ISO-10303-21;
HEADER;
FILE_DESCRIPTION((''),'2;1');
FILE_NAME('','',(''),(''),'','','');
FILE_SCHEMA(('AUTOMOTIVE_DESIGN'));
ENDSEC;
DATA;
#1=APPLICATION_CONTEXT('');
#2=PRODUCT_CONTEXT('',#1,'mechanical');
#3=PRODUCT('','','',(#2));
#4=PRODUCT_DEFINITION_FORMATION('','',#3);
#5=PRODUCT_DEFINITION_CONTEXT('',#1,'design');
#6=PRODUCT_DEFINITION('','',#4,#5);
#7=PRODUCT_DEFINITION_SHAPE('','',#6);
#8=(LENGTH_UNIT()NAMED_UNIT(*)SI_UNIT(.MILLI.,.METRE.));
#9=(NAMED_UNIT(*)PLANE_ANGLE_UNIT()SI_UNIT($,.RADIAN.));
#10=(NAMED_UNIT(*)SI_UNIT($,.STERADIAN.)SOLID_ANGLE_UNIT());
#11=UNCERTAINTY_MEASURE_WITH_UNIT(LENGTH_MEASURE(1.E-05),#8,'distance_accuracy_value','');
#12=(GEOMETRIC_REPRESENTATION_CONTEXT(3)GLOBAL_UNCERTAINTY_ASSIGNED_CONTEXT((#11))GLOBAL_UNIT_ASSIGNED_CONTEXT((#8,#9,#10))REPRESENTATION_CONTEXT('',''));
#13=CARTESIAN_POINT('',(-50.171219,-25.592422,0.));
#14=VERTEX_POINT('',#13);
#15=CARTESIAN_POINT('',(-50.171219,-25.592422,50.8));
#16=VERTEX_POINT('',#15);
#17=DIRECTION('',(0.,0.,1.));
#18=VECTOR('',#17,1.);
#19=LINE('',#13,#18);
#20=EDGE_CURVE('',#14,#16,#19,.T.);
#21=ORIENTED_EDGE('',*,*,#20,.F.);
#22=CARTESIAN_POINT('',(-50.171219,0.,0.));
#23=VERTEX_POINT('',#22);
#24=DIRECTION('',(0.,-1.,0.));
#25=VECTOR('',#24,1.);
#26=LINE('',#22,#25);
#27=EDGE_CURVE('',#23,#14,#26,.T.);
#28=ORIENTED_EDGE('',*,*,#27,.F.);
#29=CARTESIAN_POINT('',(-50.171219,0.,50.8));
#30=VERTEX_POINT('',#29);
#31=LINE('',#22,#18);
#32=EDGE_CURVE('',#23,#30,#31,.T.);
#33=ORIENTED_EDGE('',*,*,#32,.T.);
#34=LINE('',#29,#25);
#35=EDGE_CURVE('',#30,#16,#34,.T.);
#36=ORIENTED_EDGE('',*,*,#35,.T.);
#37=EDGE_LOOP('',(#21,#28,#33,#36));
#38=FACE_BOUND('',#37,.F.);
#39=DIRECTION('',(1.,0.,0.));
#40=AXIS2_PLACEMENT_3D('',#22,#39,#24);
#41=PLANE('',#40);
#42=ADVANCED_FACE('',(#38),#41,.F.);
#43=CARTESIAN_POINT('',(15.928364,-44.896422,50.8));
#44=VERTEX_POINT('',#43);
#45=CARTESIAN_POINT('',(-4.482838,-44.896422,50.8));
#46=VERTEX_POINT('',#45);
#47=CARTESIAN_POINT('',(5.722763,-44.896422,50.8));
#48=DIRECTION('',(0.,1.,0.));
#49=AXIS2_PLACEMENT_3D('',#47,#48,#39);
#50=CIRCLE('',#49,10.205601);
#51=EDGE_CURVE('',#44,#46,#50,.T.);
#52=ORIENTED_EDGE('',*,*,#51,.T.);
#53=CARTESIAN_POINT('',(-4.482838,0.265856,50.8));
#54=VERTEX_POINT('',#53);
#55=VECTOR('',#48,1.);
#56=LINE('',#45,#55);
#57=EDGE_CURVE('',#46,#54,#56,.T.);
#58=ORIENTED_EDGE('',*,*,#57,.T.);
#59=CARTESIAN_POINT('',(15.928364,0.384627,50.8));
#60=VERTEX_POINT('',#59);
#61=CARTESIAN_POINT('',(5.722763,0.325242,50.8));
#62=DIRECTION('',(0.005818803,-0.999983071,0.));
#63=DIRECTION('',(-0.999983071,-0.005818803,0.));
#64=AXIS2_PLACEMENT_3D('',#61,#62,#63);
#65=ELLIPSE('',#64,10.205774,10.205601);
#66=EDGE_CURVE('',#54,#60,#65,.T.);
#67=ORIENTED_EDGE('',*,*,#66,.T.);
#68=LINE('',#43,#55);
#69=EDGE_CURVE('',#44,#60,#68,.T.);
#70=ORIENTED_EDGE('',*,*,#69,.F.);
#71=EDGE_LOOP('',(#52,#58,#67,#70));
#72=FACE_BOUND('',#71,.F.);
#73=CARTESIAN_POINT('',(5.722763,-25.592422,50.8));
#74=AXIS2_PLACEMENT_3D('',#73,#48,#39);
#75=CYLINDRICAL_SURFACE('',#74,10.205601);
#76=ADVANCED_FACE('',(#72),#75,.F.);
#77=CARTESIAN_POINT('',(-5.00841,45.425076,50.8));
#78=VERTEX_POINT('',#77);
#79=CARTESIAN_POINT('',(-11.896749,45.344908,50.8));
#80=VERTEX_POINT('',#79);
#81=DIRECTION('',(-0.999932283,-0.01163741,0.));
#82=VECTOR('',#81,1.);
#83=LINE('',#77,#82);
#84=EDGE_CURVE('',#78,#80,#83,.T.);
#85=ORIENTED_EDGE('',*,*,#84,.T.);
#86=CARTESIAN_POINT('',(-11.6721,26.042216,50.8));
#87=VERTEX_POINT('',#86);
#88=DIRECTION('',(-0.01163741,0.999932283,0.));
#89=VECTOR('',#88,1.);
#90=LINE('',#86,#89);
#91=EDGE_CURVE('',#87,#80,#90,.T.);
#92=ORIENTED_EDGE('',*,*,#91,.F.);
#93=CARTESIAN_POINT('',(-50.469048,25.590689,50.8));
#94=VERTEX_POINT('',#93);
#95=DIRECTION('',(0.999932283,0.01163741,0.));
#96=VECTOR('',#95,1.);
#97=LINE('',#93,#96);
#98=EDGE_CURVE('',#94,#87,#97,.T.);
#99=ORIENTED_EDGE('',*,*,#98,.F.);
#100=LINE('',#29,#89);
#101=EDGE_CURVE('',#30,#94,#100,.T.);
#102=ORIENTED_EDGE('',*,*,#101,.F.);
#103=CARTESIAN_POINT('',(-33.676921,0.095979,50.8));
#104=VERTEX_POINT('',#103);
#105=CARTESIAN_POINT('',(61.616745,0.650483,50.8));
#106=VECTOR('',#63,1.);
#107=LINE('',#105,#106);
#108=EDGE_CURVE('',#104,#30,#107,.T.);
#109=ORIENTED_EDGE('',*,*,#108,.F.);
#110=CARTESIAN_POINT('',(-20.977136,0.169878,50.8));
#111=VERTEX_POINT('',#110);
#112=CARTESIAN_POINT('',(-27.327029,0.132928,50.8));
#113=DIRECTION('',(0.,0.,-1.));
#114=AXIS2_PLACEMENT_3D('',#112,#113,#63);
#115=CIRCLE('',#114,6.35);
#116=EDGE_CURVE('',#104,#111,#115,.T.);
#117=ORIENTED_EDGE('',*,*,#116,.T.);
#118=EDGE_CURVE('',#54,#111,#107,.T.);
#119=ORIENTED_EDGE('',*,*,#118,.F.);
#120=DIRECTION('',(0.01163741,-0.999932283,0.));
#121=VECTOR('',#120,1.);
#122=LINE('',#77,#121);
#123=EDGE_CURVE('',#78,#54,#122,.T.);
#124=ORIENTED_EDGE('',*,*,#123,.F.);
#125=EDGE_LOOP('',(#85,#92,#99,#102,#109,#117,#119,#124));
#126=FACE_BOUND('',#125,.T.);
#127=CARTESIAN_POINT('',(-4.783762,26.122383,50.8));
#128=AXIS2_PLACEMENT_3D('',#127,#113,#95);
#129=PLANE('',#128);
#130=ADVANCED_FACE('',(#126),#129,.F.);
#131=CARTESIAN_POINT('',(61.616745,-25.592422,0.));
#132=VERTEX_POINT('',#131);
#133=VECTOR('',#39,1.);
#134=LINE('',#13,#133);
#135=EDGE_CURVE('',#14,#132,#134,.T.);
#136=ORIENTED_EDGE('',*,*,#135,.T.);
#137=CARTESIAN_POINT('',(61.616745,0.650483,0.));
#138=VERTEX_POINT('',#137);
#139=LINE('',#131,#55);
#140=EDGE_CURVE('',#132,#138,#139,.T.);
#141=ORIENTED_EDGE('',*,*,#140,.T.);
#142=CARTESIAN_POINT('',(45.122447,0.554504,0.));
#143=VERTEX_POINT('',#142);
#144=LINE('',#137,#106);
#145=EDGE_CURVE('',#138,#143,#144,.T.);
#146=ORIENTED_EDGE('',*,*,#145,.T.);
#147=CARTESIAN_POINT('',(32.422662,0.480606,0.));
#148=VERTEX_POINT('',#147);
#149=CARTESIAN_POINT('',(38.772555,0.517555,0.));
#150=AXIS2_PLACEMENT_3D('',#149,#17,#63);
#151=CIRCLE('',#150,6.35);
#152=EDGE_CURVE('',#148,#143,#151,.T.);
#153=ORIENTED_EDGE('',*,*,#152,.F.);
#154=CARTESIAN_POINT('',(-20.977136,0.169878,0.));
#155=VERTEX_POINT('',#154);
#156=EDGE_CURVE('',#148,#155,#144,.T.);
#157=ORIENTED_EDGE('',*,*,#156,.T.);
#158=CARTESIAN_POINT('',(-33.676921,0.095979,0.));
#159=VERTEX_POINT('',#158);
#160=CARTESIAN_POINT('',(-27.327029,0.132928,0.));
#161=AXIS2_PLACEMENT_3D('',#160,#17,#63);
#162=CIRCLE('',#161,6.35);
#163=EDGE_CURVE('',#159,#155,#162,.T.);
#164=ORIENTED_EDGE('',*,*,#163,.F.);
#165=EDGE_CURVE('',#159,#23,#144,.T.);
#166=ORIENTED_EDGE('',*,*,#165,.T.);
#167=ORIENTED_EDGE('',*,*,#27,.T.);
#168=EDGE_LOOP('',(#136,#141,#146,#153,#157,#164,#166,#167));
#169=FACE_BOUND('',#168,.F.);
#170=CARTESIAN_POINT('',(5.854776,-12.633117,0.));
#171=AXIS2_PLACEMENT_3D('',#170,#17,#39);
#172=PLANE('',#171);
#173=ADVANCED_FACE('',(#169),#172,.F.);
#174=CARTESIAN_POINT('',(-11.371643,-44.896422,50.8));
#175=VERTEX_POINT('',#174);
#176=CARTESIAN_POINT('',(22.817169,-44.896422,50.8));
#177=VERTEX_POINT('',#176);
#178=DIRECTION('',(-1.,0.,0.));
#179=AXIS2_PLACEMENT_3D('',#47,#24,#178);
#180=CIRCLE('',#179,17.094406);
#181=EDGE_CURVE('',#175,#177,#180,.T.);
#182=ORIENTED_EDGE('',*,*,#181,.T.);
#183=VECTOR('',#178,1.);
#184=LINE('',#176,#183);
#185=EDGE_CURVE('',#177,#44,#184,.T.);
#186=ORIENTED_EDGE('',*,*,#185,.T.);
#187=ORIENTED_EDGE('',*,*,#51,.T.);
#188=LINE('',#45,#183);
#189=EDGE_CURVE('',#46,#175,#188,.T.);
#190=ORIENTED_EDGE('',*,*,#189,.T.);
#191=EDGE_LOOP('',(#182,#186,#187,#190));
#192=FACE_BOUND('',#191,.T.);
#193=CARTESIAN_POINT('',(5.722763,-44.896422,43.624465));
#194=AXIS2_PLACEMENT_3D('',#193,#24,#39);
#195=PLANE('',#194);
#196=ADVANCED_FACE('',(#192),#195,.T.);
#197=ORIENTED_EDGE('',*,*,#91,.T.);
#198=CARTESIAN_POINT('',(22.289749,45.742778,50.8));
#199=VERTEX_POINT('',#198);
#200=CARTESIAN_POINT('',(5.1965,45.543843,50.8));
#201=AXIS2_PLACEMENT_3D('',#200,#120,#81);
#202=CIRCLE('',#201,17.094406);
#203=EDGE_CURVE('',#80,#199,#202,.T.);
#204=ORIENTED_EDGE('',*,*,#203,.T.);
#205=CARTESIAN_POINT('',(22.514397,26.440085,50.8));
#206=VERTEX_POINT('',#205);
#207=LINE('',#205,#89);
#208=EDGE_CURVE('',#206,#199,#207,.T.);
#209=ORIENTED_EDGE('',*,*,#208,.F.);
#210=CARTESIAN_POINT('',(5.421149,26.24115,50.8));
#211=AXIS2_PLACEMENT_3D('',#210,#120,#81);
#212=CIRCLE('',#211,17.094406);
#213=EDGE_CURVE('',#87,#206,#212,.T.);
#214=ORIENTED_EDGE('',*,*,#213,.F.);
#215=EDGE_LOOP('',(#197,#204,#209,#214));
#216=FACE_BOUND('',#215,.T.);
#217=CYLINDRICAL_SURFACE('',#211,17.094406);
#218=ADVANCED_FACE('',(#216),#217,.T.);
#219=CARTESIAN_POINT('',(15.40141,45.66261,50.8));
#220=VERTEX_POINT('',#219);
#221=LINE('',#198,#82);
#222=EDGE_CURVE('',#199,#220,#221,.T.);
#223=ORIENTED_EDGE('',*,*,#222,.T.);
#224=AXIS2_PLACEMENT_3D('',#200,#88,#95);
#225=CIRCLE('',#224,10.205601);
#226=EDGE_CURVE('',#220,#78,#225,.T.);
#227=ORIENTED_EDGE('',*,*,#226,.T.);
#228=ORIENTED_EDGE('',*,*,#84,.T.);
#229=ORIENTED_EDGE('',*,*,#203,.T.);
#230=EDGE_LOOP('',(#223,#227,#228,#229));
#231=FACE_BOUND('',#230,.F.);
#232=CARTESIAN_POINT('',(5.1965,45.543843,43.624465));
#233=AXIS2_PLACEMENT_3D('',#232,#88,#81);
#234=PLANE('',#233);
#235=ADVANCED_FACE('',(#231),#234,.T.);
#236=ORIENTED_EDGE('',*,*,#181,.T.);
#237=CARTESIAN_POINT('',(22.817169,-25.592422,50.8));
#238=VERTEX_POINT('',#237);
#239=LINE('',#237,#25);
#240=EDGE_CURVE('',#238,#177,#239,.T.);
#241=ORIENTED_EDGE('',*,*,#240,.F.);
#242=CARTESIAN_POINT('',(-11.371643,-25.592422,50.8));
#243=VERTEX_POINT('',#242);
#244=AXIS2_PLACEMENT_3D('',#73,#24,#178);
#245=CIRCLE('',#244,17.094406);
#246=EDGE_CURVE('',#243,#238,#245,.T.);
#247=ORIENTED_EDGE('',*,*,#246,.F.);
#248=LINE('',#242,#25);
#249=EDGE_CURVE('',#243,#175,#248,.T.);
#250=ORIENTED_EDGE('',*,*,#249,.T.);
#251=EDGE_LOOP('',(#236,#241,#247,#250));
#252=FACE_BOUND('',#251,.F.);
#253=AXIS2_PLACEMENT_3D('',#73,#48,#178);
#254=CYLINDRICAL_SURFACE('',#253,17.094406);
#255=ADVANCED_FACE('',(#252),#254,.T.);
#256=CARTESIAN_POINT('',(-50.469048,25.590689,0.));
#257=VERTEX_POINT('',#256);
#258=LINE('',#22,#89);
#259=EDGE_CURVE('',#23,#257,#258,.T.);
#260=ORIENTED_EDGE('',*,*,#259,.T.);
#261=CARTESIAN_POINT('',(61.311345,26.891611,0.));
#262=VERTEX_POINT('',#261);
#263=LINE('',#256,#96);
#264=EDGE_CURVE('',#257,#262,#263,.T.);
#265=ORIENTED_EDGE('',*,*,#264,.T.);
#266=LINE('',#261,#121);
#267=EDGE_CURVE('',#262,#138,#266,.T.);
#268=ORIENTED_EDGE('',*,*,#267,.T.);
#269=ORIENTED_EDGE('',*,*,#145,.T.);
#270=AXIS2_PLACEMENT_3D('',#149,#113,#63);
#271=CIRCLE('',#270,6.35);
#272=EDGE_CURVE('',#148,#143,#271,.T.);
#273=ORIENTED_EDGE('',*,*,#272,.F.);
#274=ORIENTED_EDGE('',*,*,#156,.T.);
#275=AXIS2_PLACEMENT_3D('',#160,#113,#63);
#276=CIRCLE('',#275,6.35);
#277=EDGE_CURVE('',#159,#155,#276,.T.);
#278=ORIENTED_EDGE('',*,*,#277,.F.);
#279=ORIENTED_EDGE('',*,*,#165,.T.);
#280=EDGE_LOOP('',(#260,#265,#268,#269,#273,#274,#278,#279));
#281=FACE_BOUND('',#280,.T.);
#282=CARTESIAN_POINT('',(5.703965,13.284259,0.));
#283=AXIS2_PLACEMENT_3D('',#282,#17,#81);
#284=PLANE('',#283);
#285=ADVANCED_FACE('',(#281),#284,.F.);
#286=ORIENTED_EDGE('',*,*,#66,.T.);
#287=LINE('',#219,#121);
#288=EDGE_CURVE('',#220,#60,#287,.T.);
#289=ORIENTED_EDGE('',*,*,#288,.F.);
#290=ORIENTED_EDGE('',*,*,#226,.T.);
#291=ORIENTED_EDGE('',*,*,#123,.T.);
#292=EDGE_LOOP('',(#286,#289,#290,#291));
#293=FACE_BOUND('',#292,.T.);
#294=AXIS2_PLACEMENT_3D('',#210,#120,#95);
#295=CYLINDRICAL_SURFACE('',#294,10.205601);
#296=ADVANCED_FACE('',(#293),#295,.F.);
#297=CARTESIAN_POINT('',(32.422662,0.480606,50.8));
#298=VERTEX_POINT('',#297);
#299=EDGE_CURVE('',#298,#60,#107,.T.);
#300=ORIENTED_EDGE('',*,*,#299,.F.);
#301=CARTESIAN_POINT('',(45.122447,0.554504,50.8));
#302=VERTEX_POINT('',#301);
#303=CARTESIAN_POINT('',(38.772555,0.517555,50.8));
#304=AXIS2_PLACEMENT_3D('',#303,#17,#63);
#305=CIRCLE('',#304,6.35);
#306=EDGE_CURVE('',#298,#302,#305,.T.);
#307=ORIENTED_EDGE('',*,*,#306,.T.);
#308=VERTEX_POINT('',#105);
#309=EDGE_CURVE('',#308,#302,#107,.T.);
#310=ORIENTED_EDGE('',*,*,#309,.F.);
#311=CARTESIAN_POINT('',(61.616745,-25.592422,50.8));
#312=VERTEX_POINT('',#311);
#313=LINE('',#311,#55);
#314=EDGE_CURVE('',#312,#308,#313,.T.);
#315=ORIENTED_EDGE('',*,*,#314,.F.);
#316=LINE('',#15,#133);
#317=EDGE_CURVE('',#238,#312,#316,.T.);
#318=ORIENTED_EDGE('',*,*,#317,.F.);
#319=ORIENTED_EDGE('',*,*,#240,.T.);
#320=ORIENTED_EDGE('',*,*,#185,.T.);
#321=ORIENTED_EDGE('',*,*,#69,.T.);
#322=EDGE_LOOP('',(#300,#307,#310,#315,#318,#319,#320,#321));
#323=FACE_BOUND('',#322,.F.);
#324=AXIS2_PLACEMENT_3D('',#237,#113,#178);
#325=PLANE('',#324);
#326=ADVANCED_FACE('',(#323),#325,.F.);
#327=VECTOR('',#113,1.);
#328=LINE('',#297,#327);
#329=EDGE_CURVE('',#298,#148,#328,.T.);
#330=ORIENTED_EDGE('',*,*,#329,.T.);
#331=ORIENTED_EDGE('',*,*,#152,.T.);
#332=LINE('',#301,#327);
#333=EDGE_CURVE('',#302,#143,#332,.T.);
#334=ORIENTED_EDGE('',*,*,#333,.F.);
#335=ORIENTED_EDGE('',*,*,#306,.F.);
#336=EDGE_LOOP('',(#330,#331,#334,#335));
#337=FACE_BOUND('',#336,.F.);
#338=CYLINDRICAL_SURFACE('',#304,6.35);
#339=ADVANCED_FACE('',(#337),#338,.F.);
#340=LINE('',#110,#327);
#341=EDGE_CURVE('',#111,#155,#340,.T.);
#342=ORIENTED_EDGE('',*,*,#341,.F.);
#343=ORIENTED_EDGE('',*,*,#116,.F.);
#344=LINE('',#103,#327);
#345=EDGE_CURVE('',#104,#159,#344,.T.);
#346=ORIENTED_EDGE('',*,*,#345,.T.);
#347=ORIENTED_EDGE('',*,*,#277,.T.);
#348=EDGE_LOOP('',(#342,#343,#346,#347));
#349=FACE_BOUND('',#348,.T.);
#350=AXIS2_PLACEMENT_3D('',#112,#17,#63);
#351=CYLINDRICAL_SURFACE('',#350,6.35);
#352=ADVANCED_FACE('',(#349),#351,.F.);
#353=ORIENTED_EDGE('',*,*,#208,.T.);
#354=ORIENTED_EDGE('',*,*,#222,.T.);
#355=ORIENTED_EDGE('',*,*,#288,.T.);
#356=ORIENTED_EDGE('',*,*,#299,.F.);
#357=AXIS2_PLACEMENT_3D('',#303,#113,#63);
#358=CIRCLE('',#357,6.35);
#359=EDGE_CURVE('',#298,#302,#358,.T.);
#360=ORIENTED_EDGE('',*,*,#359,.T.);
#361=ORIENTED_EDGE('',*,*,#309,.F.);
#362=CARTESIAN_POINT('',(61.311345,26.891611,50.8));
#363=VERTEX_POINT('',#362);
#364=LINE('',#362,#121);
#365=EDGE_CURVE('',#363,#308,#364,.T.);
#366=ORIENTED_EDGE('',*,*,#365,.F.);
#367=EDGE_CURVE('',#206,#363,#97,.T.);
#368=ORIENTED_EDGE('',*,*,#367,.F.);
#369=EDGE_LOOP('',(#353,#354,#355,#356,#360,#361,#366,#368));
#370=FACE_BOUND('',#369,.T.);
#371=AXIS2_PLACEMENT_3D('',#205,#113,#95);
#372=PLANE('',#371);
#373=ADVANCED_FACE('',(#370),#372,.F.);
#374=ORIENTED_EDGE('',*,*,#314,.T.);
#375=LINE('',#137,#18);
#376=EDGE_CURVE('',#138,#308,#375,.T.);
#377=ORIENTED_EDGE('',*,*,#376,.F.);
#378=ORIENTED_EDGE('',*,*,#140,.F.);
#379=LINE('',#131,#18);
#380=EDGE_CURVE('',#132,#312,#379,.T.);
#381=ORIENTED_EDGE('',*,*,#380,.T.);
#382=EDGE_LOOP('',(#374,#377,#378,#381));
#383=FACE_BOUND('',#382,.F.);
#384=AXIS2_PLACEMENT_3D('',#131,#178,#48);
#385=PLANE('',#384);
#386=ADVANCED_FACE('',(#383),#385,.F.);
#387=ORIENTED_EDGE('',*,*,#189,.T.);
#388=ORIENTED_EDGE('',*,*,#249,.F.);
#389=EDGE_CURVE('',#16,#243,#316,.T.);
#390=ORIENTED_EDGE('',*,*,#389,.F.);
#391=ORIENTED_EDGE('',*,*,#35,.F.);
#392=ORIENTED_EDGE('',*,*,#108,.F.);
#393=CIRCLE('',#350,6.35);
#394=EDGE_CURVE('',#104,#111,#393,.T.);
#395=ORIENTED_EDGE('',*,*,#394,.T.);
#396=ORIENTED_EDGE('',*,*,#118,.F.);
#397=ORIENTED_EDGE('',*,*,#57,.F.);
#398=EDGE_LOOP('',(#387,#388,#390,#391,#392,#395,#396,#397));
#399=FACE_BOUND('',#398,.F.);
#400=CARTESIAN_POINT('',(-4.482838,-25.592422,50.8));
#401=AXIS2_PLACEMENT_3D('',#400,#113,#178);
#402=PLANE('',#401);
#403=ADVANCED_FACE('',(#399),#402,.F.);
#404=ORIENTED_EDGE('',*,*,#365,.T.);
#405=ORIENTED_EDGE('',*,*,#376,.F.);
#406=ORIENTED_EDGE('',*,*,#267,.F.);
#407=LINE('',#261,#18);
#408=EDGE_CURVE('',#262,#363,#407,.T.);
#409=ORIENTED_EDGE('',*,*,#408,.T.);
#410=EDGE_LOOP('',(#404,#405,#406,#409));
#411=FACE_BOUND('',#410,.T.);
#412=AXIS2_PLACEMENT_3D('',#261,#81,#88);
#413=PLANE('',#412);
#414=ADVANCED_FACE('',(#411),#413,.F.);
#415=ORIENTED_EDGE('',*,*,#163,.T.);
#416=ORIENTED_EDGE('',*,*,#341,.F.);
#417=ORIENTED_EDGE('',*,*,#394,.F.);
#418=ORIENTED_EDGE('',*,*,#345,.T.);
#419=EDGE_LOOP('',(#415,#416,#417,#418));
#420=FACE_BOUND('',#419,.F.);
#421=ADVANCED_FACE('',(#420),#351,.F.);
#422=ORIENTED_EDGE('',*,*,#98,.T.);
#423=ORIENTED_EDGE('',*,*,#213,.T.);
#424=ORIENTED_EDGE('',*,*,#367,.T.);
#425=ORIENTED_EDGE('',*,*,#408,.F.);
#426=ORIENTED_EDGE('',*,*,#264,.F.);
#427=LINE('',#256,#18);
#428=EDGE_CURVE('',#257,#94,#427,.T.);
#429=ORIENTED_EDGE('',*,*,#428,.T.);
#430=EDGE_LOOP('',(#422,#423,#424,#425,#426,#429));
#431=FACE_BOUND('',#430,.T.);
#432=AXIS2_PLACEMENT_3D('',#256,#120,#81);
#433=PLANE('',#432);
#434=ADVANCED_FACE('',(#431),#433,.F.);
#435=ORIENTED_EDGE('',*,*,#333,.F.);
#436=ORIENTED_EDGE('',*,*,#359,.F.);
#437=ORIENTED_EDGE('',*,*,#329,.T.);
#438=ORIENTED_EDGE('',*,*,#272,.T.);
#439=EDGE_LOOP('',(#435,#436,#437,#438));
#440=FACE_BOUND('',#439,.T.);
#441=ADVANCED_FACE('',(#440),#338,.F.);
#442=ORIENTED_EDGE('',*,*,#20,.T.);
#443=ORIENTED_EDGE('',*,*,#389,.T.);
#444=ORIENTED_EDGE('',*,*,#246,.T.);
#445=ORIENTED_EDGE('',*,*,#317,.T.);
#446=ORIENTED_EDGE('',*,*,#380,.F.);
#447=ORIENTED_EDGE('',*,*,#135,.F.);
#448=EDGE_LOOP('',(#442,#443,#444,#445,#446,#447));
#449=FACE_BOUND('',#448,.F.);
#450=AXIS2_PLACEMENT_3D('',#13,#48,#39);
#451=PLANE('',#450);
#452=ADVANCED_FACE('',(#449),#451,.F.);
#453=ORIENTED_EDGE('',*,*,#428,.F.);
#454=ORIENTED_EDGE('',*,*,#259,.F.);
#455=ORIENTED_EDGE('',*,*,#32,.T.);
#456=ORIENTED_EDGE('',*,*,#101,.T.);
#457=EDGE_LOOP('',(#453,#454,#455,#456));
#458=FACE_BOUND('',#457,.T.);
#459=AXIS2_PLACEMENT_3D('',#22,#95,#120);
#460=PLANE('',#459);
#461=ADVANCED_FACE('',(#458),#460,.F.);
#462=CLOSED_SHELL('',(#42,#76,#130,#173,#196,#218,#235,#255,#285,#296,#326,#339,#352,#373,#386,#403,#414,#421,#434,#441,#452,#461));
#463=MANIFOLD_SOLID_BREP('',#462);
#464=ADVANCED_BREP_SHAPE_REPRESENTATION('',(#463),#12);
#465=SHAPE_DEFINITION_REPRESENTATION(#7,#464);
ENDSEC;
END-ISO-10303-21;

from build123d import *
from build123d import SkipClean  # not in build123d's __all__

# Parameters (mm, degrees)
F1_DEPTH = 50.8
F3_DEPTH = 33.782
F4_DEPTH = 19.304
F7_DEPTH = 62.738
F8_DEPTH = 50.8


with BuildPart() as f1:
    # F0 (on Top) → F1 (new body)
    with BuildSketch(Plane.XY):
        Polygon((-50.1712188125, 0), (-50.1712188125, -25.5924221128), (61.6167448461, -25.5924221128), (61.6167448461, 0.6504831836), align=None)
    extrude(amount=F1_DEPTH)

    # F2 (on face) → F3 (cut)
    with BuildSketch(Plane.XZ.offset(25.5924221128)):
        with BuildLine():
            Line((15.9283644421, 50.8), (-4.4828384085, 50.8))
            ThreePointArc((-4.4828384085, 50.8), (5.7227630168, 40.5943985747), (15.9283644421, 50.8))
        make_face()
    extrude(amount=-F3_DEPTH, mode=Mode.SUBTRACT)

    # F2 (on face) → F4 (join)
    with BuildSketch(Plane.XZ.offset(25.5924221128)):
        with BuildLine():
            Line((-4.4828384085, 50.8), (-11.371643244, 50.8))
            ThreePointArc((-11.371643244, 50.8), (5.7227630168, 33.7055937392), (22.8171692776, 50.8))
            Line((22.8171692776, 50.8), (15.9283644421, 50.8))
            ThreePointArc((15.9283644421, 50.8), (5.7227630168, 40.5943985747), (-4.4828384085, 50.8))
        make_face()
    extrude(amount=F4_DEPTH)

    # F5 (on face) → F7 (cut)
    with BuildSketch(Plane.XY.offset(50.8)):
        with BuildLine():
            Line((-20.977136112, 0.1698775005), (-33.6769211089, 0.0959786987))
            ThreePointArc((-33.6769211089, 0.0959786987), (-27.2900792096, -6.2169643988), (-20.977136112, 0.1698775005))
        make_face()
    extrude(amount=-F7_DEPTH, mode=Mode.SUBTRACT)

    # F6 (on face) → F8 (cut)
    with BuildSketch(Plane.XY.offset(50.8)):
        with BuildLine():
            Line((45.1224471426, 0.5545044849), (32.4226621457, 0.480605683))
            ThreePointArc((32.4226621457, 0.480605683), (38.809504045, -5.8323374145), (45.1224471426, 0.5545044849))
        make_face()
    extrude(amount=-F8_DEPTH, mode=Mode.SUBTRACT)

    # F9: F1 across face


with BuildPart() as f1_1:
    add(f1.part, clean=False)
    with SkipClean():  # cleaning this boolean's faces spoils the solid; the shape is the same uncleaned
        add(f1.part.mirror(Plane(origin=(5.7227630168, 0.3252415918, 24.0477864572), x_dir=(-0.9999830706, -0.0058188033, 0), z_dir=(-0.0058188033, 0.9999830706, 0))), clean=False)


solid = f1_1.part
